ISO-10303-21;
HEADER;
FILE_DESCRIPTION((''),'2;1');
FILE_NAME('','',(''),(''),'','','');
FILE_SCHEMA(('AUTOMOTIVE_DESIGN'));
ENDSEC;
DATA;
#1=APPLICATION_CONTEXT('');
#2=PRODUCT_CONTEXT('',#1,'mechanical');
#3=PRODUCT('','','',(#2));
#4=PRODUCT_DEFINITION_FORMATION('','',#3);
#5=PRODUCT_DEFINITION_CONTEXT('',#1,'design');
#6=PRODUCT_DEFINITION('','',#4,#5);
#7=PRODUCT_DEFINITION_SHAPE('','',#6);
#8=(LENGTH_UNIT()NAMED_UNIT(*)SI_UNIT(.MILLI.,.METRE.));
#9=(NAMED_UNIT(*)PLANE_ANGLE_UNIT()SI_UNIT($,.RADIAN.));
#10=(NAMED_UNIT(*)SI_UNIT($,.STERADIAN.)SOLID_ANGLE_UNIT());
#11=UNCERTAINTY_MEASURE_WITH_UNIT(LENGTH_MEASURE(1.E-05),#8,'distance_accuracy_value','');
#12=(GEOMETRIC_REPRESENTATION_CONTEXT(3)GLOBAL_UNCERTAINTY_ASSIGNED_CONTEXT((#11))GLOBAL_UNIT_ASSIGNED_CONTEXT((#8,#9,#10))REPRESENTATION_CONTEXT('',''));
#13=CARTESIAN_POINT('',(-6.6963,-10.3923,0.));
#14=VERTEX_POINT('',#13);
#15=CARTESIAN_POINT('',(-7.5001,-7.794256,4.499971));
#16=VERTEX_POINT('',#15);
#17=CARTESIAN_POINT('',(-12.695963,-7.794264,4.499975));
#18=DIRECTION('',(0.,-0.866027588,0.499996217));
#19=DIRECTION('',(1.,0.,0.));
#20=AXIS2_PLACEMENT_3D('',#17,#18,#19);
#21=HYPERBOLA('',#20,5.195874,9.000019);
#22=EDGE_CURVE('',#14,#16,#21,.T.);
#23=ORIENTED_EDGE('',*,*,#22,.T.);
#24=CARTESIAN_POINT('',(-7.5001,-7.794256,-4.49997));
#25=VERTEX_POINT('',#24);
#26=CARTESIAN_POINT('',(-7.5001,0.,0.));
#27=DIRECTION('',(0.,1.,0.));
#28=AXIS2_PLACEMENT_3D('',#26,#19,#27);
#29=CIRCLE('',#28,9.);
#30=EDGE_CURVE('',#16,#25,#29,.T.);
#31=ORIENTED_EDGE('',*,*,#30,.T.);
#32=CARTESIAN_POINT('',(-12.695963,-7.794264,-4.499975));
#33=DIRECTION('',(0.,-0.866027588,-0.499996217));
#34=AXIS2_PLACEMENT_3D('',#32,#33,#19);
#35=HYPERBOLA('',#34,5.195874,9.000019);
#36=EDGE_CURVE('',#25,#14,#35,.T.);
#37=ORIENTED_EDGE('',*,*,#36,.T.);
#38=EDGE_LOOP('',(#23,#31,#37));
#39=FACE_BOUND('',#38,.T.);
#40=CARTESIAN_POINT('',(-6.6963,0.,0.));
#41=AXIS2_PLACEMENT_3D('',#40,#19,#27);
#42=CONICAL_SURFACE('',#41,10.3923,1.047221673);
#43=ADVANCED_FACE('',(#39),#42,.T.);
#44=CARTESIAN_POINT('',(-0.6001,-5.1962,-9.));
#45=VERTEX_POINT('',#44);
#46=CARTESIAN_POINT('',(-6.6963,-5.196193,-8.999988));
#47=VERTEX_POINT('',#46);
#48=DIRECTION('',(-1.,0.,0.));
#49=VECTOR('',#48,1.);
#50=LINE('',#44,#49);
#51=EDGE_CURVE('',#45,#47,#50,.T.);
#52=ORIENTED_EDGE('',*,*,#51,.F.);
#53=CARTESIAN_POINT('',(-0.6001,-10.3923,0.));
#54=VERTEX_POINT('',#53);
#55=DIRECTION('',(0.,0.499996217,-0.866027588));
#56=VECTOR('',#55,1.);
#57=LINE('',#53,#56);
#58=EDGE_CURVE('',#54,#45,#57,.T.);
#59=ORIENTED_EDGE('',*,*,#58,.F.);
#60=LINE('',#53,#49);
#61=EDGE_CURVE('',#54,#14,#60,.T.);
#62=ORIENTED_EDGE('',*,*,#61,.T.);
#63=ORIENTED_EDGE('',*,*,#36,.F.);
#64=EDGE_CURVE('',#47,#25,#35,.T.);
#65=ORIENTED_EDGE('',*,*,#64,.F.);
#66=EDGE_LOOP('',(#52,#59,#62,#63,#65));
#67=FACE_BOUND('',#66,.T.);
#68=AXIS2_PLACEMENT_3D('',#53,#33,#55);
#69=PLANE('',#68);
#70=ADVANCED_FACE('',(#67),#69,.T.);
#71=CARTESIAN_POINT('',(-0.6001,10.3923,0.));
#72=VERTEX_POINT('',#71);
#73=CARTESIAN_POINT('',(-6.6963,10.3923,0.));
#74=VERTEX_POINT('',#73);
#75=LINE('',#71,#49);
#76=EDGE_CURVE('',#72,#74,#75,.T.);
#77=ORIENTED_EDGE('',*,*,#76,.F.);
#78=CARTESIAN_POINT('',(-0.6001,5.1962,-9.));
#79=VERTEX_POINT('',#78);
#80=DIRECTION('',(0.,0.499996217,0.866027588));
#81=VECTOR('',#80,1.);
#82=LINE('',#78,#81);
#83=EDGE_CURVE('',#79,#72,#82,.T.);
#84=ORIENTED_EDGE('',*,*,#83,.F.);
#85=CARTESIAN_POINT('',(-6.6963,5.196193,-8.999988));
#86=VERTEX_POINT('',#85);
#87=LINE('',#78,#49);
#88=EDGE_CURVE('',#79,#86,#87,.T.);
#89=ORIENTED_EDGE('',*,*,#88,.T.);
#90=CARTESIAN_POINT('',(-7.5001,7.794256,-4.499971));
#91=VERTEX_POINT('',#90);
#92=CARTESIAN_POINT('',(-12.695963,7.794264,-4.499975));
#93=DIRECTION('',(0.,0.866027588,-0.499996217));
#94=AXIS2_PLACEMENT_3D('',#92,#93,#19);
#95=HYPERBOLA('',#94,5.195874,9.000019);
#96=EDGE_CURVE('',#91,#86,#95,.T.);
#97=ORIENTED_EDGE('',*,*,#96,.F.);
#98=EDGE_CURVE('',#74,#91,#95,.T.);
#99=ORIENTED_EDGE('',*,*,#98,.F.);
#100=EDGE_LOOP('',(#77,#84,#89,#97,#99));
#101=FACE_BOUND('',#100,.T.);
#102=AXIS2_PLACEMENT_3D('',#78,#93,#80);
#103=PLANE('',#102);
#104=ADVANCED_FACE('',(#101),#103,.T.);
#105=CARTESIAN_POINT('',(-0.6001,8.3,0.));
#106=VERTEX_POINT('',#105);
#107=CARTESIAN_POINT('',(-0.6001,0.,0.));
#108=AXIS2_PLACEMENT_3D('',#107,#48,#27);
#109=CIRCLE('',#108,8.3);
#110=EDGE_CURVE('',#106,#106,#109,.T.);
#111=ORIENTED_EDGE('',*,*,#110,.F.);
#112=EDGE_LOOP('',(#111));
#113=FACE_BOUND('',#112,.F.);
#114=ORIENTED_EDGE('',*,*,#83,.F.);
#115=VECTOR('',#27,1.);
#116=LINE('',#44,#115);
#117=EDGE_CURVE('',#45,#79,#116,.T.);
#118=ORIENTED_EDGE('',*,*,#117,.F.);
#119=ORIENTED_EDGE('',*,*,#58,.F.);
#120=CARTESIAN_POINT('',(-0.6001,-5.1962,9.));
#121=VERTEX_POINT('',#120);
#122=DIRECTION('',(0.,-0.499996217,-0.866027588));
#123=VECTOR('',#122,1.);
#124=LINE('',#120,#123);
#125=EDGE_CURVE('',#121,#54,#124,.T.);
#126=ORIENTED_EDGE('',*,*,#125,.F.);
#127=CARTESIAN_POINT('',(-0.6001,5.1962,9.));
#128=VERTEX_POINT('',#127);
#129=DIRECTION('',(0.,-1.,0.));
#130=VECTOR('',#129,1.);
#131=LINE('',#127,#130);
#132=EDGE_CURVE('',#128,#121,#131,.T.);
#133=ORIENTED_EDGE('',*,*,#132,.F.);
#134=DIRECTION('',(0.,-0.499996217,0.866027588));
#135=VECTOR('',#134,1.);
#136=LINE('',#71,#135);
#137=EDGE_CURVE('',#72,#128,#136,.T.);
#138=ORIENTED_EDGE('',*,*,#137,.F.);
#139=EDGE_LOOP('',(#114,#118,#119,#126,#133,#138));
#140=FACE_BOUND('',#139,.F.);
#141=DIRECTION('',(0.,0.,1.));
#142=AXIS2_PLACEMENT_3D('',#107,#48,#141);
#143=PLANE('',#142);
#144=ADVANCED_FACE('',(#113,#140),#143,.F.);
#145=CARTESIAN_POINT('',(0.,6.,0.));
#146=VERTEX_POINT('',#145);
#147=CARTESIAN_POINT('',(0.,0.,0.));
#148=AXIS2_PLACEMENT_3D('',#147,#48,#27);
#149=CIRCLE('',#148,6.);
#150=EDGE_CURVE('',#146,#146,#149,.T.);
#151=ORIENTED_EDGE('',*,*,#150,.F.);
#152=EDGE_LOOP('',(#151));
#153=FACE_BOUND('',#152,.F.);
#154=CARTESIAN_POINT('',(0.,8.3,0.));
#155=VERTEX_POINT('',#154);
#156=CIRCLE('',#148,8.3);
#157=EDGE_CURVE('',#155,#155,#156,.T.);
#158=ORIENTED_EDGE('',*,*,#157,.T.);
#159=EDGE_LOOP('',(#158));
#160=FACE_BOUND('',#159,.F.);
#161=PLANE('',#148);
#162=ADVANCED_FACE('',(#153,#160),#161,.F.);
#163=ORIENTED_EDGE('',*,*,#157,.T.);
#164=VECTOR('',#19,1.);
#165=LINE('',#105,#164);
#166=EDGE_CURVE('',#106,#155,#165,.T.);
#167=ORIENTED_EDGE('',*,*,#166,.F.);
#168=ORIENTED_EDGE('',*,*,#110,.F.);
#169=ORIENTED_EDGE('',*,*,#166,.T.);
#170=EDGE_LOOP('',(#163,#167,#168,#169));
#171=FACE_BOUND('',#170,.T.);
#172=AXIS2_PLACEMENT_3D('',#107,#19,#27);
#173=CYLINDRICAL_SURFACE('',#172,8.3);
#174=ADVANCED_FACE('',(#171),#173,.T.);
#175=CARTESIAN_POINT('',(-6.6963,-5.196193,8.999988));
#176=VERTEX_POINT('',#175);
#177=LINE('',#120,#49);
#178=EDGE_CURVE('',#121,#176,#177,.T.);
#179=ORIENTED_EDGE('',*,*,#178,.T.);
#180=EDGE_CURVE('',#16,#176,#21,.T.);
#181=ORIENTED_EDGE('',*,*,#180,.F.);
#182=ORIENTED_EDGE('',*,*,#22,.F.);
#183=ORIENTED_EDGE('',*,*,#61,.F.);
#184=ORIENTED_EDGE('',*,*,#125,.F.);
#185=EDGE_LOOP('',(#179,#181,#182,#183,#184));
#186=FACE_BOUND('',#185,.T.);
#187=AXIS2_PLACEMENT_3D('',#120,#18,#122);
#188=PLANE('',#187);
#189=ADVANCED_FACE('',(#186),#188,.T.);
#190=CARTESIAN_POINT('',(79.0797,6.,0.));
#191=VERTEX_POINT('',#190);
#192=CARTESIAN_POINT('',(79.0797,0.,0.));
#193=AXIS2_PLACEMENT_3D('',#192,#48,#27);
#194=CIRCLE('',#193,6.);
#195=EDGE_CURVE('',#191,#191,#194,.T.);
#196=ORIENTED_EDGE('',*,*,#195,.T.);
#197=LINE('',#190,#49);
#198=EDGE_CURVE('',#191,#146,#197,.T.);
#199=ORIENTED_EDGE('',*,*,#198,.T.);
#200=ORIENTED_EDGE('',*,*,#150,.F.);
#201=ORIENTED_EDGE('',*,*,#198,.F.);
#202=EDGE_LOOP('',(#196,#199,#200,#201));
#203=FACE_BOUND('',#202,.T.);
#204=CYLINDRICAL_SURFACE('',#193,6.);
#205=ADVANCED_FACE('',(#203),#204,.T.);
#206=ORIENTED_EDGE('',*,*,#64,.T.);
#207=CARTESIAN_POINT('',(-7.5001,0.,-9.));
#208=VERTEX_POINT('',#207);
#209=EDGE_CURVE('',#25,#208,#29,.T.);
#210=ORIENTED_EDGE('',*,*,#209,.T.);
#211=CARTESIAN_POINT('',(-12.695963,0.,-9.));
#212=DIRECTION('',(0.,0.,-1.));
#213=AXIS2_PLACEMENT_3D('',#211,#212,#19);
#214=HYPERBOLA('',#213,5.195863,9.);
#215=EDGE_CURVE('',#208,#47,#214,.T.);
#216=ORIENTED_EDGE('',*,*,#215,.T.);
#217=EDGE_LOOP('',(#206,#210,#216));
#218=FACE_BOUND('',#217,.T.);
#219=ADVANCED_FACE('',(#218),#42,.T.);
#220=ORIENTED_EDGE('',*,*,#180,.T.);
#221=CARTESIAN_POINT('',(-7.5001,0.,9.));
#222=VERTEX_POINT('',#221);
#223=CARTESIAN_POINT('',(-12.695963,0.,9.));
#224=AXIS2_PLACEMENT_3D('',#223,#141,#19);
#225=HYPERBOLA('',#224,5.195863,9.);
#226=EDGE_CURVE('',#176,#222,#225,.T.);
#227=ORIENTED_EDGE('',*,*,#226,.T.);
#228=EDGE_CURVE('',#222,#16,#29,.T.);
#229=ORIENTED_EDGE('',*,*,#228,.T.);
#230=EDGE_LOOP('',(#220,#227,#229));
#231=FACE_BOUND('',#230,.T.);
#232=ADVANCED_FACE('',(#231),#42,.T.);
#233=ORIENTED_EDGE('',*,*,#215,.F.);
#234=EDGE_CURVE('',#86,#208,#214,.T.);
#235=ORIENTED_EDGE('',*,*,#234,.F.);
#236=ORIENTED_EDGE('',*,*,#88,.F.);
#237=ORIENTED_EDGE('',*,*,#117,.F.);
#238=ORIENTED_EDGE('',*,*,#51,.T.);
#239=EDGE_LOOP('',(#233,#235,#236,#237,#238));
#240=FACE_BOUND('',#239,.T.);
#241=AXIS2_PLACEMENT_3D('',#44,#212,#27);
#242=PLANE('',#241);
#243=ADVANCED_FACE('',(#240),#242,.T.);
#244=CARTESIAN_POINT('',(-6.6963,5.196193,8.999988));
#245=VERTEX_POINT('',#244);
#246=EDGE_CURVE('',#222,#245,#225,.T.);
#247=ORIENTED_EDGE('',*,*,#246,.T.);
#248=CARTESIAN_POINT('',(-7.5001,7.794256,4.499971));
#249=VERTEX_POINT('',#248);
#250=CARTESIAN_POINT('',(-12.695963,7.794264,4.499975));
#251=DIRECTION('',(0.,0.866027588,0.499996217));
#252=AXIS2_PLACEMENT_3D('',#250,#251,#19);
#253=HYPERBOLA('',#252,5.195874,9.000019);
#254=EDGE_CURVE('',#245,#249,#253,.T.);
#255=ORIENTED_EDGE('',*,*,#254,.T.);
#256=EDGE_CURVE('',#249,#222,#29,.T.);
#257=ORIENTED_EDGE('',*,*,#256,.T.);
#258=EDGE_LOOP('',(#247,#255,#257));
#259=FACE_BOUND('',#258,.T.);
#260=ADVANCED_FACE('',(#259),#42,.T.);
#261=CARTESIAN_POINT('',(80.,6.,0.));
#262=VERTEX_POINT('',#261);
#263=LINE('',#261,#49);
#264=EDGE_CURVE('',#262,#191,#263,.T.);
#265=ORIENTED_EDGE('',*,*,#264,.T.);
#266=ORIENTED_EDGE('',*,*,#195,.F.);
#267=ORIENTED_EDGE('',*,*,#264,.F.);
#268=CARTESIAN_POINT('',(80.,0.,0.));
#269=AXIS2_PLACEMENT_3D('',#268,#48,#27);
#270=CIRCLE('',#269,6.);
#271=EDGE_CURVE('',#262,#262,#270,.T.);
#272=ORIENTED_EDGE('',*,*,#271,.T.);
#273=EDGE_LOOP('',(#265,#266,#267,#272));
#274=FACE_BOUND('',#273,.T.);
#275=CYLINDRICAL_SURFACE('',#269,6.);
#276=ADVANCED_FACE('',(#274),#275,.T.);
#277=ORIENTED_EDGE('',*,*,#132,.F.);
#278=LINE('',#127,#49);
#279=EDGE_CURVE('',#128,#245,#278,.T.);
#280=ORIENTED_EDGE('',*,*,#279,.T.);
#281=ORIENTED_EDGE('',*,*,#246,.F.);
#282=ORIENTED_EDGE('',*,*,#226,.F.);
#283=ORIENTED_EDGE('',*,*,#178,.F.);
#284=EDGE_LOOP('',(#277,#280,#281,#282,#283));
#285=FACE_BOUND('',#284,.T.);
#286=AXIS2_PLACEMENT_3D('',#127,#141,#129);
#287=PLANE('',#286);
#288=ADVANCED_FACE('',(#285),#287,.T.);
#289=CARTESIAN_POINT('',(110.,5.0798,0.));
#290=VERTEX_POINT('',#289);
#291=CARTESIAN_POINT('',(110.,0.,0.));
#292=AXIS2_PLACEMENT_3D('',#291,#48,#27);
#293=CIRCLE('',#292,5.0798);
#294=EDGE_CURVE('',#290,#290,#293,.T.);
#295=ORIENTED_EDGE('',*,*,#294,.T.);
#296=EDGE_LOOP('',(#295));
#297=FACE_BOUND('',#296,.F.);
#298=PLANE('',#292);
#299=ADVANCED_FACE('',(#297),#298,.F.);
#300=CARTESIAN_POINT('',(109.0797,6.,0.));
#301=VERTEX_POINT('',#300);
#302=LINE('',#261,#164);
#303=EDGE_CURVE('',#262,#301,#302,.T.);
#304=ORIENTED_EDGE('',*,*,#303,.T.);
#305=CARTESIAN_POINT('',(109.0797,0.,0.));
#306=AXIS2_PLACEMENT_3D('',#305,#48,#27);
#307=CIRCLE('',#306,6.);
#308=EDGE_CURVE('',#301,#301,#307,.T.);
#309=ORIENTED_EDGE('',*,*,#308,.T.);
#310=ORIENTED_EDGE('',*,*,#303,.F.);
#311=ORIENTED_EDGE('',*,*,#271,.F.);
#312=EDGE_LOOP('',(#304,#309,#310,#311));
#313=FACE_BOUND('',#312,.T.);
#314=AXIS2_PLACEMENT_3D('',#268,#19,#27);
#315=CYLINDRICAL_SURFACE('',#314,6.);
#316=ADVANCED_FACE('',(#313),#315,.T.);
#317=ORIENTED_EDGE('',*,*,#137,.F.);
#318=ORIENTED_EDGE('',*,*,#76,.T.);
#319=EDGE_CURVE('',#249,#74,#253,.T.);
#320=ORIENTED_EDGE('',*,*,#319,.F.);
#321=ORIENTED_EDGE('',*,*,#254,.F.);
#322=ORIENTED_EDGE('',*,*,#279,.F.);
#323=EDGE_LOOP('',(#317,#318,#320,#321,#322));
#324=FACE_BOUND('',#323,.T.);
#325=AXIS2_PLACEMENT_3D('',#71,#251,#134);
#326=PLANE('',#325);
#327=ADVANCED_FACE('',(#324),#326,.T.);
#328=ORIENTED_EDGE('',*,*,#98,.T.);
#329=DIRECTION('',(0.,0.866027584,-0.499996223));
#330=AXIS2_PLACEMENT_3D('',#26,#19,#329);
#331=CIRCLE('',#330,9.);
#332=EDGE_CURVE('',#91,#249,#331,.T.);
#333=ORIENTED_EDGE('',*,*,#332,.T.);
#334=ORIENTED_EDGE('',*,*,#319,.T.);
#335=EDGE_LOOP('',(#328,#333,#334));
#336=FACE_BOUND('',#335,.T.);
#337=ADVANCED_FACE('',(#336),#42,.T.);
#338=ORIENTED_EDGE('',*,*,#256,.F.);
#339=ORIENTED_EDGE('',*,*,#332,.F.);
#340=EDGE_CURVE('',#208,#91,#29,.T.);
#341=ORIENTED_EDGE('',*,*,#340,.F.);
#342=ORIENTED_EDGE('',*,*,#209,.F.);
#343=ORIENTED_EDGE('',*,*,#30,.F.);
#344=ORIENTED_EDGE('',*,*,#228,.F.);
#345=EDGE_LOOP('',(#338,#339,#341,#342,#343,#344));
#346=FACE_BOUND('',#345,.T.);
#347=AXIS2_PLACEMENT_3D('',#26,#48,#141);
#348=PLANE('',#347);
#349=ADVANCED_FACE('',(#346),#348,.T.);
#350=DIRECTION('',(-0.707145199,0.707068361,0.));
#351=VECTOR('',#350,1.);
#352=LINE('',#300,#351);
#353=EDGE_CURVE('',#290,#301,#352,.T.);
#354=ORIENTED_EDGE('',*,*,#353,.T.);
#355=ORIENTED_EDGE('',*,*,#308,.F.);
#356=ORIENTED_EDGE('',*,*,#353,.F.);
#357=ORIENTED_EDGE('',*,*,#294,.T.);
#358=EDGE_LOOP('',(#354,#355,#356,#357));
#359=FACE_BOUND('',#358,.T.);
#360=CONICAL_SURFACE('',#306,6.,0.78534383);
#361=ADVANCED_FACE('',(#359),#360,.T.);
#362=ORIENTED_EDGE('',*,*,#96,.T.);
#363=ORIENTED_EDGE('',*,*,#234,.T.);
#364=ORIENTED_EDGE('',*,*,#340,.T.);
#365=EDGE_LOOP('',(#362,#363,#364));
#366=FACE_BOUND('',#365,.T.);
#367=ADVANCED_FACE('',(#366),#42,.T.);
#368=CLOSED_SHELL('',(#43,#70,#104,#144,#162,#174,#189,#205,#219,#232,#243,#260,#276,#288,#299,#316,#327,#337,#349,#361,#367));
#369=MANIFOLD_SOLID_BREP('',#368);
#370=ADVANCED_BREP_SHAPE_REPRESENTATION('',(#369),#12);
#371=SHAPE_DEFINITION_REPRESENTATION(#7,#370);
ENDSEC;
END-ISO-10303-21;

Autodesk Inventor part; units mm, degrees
ref_plane "YZ Plane" through (0, 0, 0) normal (1, 0, 0) x (0, 1, 0)
ref_plane "XZ Plane" through (0, 0, 0) normal (0, 1, 0) x (-1, 0, 0)
sketch "草图1" plane through (0, 0, 0) normal (0, 0, 1) x (1, 0, 0)
  line L0 (0, 8.3) -> (0, 6)
  line L1 (80, 6) -> (110, 6)
  line L2 (110, 6) -> (110, 0)
  line L3 (110, 0) -> (-0.6001, 0)
  line L4 (-22.7201, 0) -> (132.12, 0) projected
  line L5 (-0.6001, 0) -> (-0.6001, 8.3)
  line L6 (-0.6001, 8.3) -> (0, 8.3)
  line L7 (80, 6) -> (79.0797, 6)
  line L8 (79.0797, 6) -> (0, 6)
  line L9 (0, -1.66) -> (0, 9.96) projected
  dimension "d0" = 110
  dimension "d1" = 30
  dimension "d2" = 12
  dimension "d9" = 0.6001
  dimension "d10" = 16.6
  dimension "d13" = 0.9203
  dimension "d14" = 12
revolve "轴承体" add sketch "草图1" angle 360 about axis through (110, 0, 0) along (-1, 0, 0)
sketch "草图2" plane through (-0.6001, 0, 0) normal (-1, 0, 0) x (0, 0, 1)
  line L0 (0, 10.3923) -> (9, 5.1962)
  line L1 (9, 5.1962) -> (9, -5.1962)
  line L2 (9, -5.1962) -> (0, -10.3923)
  line L3 (0, -10.3923) -> (-9, -5.1962)
  line L4 (-9, -5.1962) -> (-9, 5.1962)
  line L5 (-9, 5.1962) -> (0, 10.3923)
  point P0 (0, 0)
  point P1 (0, 0)
  dimension "d11" = 18
extrude "头" add sketch "草图2" along normal blind 6.9
sketch "草图4" plane through (0, 0, 0) normal (0, 0, 1) x (1, 0, 0)
  line L0 (-7.5001, 9) -> (-7.5001, 10.3923)
  line L1 (-7.5001, 10.3923) -> (-6.6963, 10.3923)
  line L2 (-6.6963, 10.3923) -> (-7.5001, 9)
  line L3 (-8.8801, 0) -> (0.7799, 0) projected
  line L4 (-0.6001, 10.3923) -> (-7.5001, 10.3923) projected
  line L5 (-7.5001, 5.1962) -> (-7.5001, 10.3923) projected
  dimension "d5" = 30
  dimension "d19" = 18
revolve "倒角1" cut sketch "草图4" angle 360 about axis through (-10, 0, 0) along (1, 0, 0)
thread "螺纹" size "M12x1.5" class "6g" standard "GB Metric profile" length 30
chamfer "倒角2" distance 0.9202 distance2 0.9203 1 edges at (110, -6, 0) measured on face at (110, 1.8579, -1.646)
ref_plane "Work Plane1" through (1.525, 0, 0) normal (0, 0, 1) x (1, 0, 0)
equation "\"d0\" = NLG"
equation "\"d1\" = GEL"
equation "\"d2\" = GD"
equation "\"d10\" = SD2"
equation "\"d14\" = BDM"
equation "\"d11\" = SW"
equation "\"d3\" = KOH - SD"
equation "\"d5\" = ANG1"
equation "\"d19\" = SW0"
equation "\"d15\" = GEL"
equation "\"d6\" = -0.5 * SPD + 0.5 * GD"
equation "\"NLG\" = 110"
equation "\"GD\" = NND"
equation "\"BDM\" = NND"
equation "\"KOH\" = 7.5"
equation "\"GEL\" = 30"
equation "\"SW\" = 18"
equation "\"SW0\" = SW"
equation "\"SPD\" = NND - 1.2269 * PTC"
equation "\"SD2\" = 16.6"
equation "\"SD\" = 0.6"
equation "\"ANG1\" = 30deg"
equation "\"GAL\" = 0.61345 * PTC"
equation "\"GUL\" = 0.61345 * PTC"
equation "\"RR\" = 0.6"
equation "\"WFT\" = 0.4"
equation "\"GD1\" = THREADDIA - 1.2269 * PTC"
equation "\"THREADDIA\" = 12"
equation "\"SDH\" = 16.5"
equation "\"TOA\" = 30deg"
equation "\"FAWI\" = 45deg"
equation "\"PTC\" = 1.5"
equation "\"NND\" = 12"
equation "\"E0\" = 1.155 * SW"
properties part number "螺栓 GB/T 5785 M12 x 1.5 x 110" material "钢，软"
